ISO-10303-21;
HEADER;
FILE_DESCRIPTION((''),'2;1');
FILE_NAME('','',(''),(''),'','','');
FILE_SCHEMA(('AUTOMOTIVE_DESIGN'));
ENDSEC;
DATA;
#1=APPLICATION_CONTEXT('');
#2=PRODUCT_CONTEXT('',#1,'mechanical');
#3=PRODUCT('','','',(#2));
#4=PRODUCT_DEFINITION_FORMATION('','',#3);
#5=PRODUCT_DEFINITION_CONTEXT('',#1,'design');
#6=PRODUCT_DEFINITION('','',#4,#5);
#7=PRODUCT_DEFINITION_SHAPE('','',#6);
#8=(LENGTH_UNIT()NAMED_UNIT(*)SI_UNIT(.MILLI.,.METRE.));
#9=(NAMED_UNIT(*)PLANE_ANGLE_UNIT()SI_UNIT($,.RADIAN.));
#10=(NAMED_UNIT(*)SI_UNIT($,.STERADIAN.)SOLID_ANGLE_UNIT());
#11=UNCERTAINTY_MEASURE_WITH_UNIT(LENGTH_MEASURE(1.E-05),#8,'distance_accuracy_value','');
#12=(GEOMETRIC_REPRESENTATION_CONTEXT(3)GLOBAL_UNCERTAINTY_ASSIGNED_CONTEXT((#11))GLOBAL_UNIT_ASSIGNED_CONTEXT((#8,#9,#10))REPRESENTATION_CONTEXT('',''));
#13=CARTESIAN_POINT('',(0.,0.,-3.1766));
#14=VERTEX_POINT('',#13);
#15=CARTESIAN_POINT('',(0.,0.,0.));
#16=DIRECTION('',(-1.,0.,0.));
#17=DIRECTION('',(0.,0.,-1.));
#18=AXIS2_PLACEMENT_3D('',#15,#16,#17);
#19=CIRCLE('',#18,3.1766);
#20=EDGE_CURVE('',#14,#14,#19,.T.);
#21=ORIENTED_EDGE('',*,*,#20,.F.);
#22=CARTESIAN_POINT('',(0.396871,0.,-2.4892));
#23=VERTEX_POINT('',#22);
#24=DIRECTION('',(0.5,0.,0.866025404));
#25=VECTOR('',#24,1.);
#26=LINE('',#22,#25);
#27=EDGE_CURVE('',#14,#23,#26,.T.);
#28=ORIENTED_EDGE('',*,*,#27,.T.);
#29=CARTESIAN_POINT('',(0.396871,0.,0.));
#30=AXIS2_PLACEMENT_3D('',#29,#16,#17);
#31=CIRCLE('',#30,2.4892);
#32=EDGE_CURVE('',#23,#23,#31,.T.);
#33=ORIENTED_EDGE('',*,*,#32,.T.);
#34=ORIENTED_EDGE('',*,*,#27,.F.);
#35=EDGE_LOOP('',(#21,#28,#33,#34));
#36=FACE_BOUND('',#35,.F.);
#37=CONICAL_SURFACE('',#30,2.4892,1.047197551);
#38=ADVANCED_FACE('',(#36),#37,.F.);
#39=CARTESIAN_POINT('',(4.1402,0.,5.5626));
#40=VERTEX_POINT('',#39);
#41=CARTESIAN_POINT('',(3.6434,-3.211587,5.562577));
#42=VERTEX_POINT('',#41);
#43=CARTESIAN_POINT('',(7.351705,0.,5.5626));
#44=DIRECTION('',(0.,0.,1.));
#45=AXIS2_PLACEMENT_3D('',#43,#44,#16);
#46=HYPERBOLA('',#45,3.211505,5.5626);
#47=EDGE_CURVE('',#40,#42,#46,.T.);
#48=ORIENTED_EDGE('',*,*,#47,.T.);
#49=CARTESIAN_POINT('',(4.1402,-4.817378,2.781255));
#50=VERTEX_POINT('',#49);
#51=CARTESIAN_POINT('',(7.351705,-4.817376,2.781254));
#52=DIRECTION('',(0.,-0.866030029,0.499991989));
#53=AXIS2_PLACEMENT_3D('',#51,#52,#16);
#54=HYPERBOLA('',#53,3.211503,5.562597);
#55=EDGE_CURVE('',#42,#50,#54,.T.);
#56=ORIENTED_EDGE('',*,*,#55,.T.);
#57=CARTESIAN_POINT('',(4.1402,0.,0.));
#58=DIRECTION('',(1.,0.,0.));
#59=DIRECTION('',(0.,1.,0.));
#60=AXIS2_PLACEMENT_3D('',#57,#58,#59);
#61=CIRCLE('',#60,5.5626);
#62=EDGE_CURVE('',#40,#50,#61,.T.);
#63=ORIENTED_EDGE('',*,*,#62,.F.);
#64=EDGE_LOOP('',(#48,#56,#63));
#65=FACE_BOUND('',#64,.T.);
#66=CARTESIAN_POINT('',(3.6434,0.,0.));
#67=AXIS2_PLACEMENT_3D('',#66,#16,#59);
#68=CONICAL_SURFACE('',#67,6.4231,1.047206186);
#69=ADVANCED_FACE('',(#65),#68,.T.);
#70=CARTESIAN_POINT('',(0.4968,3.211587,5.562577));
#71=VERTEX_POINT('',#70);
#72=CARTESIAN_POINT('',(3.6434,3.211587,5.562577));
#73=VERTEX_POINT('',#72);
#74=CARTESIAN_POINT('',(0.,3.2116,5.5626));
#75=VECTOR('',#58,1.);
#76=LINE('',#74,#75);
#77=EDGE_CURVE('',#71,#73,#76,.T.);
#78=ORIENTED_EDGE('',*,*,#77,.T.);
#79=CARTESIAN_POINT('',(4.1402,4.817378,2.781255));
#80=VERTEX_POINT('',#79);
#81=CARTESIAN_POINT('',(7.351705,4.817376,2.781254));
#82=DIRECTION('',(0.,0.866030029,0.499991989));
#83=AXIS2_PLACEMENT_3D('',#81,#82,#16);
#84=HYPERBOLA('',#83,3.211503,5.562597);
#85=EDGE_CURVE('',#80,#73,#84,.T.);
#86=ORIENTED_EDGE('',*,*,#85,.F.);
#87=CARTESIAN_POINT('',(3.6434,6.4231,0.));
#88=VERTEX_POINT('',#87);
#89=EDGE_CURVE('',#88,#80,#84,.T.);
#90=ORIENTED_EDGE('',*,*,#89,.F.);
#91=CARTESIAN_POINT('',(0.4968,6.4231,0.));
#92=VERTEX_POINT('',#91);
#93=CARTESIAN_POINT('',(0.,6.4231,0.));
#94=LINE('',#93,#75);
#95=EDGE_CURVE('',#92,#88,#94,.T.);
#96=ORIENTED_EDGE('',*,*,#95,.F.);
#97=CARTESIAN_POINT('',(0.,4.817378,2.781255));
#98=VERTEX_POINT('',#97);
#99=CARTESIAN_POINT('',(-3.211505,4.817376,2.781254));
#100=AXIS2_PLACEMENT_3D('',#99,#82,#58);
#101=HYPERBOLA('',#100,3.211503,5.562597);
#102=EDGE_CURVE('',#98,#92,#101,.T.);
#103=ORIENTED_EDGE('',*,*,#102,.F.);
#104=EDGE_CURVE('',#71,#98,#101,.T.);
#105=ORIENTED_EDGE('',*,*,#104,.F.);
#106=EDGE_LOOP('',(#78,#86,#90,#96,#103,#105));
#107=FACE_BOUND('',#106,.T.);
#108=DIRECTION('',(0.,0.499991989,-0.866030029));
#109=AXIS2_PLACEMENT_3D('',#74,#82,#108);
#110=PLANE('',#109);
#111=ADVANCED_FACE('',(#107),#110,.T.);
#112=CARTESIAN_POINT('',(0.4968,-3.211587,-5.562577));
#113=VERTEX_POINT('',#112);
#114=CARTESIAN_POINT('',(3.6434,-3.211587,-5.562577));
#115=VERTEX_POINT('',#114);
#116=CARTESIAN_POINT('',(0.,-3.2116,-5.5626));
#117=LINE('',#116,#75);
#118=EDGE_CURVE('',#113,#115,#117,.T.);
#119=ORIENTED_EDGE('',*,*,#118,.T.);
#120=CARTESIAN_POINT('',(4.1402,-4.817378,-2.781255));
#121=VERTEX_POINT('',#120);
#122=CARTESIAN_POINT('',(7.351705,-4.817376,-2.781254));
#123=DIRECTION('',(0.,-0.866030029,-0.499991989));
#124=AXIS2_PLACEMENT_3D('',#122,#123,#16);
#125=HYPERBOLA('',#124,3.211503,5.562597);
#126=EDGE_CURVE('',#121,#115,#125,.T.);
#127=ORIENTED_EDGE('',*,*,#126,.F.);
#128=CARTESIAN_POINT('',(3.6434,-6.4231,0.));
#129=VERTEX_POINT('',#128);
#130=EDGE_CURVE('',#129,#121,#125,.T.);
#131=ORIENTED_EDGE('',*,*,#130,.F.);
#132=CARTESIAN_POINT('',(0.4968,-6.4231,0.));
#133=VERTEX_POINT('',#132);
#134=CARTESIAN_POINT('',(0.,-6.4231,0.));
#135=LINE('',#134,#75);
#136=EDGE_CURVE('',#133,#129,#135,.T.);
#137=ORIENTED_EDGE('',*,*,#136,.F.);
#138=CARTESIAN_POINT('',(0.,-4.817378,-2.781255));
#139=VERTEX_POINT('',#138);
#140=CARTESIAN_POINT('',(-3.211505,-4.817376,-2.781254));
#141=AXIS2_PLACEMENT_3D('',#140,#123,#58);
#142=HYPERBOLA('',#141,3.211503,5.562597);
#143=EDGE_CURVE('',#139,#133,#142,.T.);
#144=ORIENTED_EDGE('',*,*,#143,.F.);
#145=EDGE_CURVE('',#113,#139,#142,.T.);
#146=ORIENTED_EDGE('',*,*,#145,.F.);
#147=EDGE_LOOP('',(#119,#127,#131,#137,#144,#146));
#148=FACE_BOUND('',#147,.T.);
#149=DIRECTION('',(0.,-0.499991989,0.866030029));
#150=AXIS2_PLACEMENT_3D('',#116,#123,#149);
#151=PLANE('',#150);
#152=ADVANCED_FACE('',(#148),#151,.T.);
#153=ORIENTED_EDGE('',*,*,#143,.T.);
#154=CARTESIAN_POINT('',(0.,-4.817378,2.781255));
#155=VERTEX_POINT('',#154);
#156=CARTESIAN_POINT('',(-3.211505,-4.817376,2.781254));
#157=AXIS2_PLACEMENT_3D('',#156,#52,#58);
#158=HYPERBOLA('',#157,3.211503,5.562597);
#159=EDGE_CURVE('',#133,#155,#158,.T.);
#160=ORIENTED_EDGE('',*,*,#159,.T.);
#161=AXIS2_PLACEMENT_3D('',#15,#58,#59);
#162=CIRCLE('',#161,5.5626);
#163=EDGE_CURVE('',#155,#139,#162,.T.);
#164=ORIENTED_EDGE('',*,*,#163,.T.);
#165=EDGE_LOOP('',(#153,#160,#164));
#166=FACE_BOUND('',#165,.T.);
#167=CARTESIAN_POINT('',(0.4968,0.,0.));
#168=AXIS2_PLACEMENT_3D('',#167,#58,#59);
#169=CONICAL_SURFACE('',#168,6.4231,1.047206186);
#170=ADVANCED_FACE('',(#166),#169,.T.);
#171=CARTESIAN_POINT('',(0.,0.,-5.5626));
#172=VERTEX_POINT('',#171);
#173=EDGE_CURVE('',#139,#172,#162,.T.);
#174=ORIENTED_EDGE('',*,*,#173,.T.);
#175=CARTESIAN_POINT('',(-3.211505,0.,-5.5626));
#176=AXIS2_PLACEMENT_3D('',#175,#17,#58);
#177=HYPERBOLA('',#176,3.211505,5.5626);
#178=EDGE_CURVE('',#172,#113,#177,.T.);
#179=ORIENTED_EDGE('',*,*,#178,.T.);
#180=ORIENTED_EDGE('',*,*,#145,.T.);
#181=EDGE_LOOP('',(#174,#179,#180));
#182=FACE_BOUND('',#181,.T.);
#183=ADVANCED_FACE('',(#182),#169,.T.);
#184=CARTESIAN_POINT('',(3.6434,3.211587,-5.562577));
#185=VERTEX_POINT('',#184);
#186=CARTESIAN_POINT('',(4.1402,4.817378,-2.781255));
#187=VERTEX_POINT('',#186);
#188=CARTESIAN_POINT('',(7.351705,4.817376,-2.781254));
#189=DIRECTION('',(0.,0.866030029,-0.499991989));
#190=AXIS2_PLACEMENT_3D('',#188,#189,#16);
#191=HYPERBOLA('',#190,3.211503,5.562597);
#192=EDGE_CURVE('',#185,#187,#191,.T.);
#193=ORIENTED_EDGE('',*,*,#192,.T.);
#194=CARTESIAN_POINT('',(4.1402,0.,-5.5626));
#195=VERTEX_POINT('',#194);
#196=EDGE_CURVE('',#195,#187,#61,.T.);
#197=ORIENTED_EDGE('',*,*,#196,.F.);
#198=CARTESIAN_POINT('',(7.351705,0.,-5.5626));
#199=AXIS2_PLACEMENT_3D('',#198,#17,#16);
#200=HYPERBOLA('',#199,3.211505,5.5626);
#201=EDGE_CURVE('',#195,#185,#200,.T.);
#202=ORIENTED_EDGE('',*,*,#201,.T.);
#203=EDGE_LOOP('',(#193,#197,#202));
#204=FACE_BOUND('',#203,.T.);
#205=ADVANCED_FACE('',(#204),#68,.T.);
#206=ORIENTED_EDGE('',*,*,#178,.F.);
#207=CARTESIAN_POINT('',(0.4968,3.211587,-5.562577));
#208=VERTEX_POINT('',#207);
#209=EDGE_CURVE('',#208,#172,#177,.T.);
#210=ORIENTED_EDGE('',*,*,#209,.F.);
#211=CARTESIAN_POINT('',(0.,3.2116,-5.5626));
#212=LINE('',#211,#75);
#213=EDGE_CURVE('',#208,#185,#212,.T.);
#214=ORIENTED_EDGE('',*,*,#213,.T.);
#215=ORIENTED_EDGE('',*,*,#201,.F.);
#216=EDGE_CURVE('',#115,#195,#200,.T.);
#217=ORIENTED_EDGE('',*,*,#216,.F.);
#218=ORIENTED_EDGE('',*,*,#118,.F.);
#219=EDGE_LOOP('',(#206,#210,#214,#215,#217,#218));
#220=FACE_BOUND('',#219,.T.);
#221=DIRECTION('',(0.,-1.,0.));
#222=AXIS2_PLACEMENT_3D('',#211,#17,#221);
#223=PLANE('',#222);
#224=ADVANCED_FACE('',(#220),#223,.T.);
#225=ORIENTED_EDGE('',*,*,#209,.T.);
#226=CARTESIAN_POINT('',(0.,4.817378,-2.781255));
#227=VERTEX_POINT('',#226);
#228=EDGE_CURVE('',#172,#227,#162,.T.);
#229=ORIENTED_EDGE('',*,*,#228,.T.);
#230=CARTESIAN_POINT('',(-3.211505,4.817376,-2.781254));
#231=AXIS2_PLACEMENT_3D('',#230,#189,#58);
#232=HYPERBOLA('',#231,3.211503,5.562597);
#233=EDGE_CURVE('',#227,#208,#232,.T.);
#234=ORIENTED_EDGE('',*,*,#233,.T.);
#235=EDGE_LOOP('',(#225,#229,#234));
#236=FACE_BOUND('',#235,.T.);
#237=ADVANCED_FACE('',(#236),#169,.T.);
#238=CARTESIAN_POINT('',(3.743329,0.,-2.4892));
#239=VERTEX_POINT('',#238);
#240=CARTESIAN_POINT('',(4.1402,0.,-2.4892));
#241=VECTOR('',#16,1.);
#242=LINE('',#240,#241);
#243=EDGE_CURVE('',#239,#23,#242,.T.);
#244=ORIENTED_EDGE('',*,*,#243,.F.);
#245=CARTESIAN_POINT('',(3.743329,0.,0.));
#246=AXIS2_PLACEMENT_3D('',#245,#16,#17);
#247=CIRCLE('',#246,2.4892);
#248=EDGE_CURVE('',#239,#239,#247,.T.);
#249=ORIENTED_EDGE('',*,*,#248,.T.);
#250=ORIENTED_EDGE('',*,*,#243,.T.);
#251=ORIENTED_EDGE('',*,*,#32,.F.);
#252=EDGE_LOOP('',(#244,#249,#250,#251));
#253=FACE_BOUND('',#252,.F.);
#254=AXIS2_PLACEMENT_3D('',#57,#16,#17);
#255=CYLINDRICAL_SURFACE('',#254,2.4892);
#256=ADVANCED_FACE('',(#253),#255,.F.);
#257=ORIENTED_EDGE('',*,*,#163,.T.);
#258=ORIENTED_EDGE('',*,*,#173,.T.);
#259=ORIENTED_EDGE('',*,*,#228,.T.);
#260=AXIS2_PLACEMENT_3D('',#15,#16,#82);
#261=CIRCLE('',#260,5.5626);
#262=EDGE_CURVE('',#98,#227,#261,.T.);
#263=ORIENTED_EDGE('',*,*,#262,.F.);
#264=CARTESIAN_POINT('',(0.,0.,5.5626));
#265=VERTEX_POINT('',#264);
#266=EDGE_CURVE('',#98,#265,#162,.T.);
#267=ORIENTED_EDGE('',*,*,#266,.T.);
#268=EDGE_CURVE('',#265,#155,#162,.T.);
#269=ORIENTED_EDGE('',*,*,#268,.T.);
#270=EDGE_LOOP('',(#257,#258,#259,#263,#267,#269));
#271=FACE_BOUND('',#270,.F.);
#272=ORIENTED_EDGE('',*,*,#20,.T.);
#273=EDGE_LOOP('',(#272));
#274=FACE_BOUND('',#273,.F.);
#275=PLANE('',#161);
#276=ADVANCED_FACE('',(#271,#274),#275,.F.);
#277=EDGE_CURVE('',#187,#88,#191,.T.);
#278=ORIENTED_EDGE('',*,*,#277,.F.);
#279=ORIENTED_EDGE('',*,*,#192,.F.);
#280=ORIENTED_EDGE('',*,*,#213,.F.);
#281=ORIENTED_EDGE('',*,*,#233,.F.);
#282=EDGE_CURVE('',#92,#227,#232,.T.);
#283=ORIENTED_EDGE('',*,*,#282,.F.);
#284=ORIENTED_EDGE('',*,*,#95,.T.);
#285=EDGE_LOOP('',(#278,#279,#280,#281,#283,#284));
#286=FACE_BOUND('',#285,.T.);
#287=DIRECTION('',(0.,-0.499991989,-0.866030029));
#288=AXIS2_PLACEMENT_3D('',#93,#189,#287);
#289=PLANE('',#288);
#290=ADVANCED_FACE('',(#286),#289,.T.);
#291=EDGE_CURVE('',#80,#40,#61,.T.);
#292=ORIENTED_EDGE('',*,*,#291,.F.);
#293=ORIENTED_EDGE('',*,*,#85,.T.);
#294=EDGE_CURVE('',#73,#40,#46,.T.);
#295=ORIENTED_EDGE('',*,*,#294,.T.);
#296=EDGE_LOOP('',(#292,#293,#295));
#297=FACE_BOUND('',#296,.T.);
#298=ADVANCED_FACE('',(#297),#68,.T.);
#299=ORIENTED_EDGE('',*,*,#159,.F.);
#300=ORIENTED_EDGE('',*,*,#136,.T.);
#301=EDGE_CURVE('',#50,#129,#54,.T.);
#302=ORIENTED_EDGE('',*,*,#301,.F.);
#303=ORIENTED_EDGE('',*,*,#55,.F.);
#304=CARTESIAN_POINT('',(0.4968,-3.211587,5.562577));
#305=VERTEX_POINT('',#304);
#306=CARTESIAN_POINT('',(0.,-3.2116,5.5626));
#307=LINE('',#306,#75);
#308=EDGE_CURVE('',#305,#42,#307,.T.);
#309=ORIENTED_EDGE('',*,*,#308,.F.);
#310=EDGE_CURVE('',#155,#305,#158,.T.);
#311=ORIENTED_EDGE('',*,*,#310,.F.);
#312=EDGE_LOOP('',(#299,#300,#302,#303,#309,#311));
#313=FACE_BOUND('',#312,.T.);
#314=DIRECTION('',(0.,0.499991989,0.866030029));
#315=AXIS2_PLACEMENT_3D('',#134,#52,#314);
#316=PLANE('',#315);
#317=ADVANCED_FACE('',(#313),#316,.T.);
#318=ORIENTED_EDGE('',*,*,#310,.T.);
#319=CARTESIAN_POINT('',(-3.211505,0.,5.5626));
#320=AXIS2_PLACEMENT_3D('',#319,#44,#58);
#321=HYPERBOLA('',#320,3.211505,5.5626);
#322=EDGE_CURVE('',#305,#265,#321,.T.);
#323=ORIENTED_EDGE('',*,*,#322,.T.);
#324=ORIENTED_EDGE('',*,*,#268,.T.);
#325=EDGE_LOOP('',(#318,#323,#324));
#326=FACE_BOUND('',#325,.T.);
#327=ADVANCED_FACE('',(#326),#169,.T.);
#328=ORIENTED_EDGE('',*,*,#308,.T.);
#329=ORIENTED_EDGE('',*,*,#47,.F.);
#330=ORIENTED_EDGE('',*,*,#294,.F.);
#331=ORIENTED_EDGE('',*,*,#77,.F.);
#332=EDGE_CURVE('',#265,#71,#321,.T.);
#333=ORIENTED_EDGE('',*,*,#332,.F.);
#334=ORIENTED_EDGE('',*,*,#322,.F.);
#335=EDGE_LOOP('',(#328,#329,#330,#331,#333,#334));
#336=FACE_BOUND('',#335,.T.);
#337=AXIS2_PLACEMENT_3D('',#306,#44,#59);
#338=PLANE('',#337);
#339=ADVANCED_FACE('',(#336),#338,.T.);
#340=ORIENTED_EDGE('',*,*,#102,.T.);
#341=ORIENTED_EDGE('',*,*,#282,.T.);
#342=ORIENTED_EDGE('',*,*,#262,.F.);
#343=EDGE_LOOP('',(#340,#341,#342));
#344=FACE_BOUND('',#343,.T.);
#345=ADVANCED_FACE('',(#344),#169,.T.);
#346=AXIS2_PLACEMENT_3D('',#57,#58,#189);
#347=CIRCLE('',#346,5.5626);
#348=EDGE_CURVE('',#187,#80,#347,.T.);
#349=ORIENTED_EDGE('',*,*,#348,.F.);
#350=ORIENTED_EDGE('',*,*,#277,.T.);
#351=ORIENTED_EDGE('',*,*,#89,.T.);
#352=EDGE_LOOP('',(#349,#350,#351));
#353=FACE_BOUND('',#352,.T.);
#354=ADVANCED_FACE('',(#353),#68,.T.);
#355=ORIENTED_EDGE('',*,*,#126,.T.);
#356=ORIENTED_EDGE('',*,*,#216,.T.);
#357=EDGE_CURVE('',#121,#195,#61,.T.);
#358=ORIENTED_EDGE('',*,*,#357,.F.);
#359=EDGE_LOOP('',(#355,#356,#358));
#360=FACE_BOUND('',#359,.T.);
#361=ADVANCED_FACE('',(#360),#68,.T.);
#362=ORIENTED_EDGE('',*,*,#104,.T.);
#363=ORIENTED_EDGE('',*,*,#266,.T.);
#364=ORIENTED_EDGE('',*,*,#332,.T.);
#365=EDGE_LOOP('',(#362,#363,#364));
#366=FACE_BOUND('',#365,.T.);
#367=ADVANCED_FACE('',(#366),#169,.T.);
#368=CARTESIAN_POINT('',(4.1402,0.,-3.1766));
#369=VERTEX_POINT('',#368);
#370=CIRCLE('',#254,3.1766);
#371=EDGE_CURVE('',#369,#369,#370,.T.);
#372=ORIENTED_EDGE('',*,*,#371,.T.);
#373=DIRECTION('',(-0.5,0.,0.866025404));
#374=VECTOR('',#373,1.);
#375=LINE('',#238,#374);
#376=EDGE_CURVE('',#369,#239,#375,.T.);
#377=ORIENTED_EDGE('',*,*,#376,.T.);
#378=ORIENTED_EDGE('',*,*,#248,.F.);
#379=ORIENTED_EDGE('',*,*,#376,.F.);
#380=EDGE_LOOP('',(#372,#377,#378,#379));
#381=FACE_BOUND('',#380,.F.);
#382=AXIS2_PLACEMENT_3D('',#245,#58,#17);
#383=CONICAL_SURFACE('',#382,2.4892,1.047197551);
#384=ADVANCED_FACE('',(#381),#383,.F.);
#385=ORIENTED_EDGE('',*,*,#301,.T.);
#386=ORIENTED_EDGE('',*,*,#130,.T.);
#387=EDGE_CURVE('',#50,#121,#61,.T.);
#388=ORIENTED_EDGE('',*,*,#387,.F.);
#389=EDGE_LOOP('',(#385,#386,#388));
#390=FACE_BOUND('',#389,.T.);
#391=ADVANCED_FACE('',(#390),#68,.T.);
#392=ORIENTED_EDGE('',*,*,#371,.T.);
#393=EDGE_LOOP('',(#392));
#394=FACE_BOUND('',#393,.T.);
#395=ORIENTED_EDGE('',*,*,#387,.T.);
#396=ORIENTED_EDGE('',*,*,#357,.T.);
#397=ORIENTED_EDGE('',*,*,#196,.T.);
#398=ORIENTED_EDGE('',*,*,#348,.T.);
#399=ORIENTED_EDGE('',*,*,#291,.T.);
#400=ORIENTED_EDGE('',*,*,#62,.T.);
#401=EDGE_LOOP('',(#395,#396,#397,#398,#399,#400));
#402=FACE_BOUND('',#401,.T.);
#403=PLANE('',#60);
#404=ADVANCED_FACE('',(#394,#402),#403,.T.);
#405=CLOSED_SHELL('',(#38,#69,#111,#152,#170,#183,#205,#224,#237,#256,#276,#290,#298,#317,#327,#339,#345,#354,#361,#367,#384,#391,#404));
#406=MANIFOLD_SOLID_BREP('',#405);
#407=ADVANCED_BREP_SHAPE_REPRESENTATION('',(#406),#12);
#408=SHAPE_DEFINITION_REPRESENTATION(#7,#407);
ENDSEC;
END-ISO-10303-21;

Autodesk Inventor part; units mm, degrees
ref_plane "YZ Plane" through (0, 0, 0) normal (1, 0, 0) x (0, 1, 0)
ref_plane "XZ Plane" through (0, 0, 0) normal (0, 1, 0) x (-1, 0, 0)
sketch "Sketch1" plane through (0, 0, 0) normal (1, 0, 0) x (0, 1, 0)
  line L0 (-6.4231, 0) -> (-3.2116, 5.5626)
  line L1 (-3.2116, 5.5626) -> (3.2116, 5.5626)
  line L2 (3.2116, 5.5626) -> (6.4231, 0)
  line L3 (6.4231, 0) -> (3.2116, -5.5626)
  line L4 (3.2116, -5.5626) -> (-3.2116, -5.5626)
  line L5 (-3.2116, -5.5626) -> (-6.4231, 0)
  point P0 (0, 0)
  point P1 (0, 0)
  dimension "d0" = 12.8463
extrude "Body" add sketch "Sketch1" along normal blind 4.1402
sketch "Sketch2" plane through (0, 0, 0) normal (0, 0, 1) x (1, 0, 0)
  line L0 (0, 3.2116) -> (0, 6.4231) projected
  line L1 (0, 6.4231) -> (4.1402, 6.4231) projected
  line L2 (4.1402, 3.2116) -> (4.1402, 6.4231) projected
  line L3 (-0.828, 0) -> (4.9682, 0) projected
  line L4 (0.4968, 6.4231) -> (0, 5.5626)
  line L5 (3.6434, 6.4231) -> (4.1402, 5.5626)
  dimension "d3" = 30
  dimension "d4" = 30
  dimension "d5" = 11.1252
  dimension "d6" = 11.1252
revolve "Chamfer1" cut sketch "Sketch2" angle 360 about axis through (-10, 0, 0) along (1, 0, 0)
sketch "Sketch3" plane through (4.1402, 0, 0) normal (1, 0, 0) x (0, 0, -1)
  arc A0 (-2.7813, -4.8174) -> (2.7813, -4.8174) centre (0, 0) ccw projected
hole "Thread" at (4.1402, 0, 0) direction (-1, 0, 0) diameter 4.9784 end through all thread size "1/4-20 UNC" class "2B" standard "ANSI Unified Screw Threads"
chamfer "Chamfer2" distance 0.6874 angle 30 1 edges at (4.1402, 0, 2.4892) measured on face at (4.1402, 4.5118, 0.1)
chamfer "Chamfer3" distance 0.6874 angle 30 1 edges at (0, 0, 2.4892) measured on face at (0, 4.5118, 0.1)
ref_plane "Work Plane1" through (-13.3509, 0, 0) normal (0, -0.8660254, -0.5) x (1, 0, 0)
equation "\"d0\" = 1.1547 * SW"
equation "\"d1\" = KOH"
equation "\"d3\" = ANG1"
equation "\"d4\" = ANG2"
equation "\"d5\" = SW0"
equation "\"d6\" = SW01"
equation "\"d8\" = -0.5 * GD1 + 0.5 * NND"
equation "\"d40\" = -0.5 * GD1 + 0.5 * NND"
equation "\"d10\" = -0.5 * GD1 + 0.5 * NND"
equation "\"d41\" = -0.5 * GD1 + 0.5 * NND"
equation "\"ANG1\" = 30deg"
equation "\"ANG2\" = 30deg"
equation "\"NND\" = 6.35"
equation "\"KOH\" = 4.1402"
equation "\"SW\" = 11.1252"
equation "\"SW0\" = SW"
equation "\"SW01\" = SW"
equation "\"THREADDIA\" = 6.35"
equation "\"TOA\" = 30deg"
equation "\"E0\" = 1.155 * SW"
equation "\"GD1\" = 4.975185"
properties part number "AS 2465 - 1/4  UNC" material "Steel, Mild"
